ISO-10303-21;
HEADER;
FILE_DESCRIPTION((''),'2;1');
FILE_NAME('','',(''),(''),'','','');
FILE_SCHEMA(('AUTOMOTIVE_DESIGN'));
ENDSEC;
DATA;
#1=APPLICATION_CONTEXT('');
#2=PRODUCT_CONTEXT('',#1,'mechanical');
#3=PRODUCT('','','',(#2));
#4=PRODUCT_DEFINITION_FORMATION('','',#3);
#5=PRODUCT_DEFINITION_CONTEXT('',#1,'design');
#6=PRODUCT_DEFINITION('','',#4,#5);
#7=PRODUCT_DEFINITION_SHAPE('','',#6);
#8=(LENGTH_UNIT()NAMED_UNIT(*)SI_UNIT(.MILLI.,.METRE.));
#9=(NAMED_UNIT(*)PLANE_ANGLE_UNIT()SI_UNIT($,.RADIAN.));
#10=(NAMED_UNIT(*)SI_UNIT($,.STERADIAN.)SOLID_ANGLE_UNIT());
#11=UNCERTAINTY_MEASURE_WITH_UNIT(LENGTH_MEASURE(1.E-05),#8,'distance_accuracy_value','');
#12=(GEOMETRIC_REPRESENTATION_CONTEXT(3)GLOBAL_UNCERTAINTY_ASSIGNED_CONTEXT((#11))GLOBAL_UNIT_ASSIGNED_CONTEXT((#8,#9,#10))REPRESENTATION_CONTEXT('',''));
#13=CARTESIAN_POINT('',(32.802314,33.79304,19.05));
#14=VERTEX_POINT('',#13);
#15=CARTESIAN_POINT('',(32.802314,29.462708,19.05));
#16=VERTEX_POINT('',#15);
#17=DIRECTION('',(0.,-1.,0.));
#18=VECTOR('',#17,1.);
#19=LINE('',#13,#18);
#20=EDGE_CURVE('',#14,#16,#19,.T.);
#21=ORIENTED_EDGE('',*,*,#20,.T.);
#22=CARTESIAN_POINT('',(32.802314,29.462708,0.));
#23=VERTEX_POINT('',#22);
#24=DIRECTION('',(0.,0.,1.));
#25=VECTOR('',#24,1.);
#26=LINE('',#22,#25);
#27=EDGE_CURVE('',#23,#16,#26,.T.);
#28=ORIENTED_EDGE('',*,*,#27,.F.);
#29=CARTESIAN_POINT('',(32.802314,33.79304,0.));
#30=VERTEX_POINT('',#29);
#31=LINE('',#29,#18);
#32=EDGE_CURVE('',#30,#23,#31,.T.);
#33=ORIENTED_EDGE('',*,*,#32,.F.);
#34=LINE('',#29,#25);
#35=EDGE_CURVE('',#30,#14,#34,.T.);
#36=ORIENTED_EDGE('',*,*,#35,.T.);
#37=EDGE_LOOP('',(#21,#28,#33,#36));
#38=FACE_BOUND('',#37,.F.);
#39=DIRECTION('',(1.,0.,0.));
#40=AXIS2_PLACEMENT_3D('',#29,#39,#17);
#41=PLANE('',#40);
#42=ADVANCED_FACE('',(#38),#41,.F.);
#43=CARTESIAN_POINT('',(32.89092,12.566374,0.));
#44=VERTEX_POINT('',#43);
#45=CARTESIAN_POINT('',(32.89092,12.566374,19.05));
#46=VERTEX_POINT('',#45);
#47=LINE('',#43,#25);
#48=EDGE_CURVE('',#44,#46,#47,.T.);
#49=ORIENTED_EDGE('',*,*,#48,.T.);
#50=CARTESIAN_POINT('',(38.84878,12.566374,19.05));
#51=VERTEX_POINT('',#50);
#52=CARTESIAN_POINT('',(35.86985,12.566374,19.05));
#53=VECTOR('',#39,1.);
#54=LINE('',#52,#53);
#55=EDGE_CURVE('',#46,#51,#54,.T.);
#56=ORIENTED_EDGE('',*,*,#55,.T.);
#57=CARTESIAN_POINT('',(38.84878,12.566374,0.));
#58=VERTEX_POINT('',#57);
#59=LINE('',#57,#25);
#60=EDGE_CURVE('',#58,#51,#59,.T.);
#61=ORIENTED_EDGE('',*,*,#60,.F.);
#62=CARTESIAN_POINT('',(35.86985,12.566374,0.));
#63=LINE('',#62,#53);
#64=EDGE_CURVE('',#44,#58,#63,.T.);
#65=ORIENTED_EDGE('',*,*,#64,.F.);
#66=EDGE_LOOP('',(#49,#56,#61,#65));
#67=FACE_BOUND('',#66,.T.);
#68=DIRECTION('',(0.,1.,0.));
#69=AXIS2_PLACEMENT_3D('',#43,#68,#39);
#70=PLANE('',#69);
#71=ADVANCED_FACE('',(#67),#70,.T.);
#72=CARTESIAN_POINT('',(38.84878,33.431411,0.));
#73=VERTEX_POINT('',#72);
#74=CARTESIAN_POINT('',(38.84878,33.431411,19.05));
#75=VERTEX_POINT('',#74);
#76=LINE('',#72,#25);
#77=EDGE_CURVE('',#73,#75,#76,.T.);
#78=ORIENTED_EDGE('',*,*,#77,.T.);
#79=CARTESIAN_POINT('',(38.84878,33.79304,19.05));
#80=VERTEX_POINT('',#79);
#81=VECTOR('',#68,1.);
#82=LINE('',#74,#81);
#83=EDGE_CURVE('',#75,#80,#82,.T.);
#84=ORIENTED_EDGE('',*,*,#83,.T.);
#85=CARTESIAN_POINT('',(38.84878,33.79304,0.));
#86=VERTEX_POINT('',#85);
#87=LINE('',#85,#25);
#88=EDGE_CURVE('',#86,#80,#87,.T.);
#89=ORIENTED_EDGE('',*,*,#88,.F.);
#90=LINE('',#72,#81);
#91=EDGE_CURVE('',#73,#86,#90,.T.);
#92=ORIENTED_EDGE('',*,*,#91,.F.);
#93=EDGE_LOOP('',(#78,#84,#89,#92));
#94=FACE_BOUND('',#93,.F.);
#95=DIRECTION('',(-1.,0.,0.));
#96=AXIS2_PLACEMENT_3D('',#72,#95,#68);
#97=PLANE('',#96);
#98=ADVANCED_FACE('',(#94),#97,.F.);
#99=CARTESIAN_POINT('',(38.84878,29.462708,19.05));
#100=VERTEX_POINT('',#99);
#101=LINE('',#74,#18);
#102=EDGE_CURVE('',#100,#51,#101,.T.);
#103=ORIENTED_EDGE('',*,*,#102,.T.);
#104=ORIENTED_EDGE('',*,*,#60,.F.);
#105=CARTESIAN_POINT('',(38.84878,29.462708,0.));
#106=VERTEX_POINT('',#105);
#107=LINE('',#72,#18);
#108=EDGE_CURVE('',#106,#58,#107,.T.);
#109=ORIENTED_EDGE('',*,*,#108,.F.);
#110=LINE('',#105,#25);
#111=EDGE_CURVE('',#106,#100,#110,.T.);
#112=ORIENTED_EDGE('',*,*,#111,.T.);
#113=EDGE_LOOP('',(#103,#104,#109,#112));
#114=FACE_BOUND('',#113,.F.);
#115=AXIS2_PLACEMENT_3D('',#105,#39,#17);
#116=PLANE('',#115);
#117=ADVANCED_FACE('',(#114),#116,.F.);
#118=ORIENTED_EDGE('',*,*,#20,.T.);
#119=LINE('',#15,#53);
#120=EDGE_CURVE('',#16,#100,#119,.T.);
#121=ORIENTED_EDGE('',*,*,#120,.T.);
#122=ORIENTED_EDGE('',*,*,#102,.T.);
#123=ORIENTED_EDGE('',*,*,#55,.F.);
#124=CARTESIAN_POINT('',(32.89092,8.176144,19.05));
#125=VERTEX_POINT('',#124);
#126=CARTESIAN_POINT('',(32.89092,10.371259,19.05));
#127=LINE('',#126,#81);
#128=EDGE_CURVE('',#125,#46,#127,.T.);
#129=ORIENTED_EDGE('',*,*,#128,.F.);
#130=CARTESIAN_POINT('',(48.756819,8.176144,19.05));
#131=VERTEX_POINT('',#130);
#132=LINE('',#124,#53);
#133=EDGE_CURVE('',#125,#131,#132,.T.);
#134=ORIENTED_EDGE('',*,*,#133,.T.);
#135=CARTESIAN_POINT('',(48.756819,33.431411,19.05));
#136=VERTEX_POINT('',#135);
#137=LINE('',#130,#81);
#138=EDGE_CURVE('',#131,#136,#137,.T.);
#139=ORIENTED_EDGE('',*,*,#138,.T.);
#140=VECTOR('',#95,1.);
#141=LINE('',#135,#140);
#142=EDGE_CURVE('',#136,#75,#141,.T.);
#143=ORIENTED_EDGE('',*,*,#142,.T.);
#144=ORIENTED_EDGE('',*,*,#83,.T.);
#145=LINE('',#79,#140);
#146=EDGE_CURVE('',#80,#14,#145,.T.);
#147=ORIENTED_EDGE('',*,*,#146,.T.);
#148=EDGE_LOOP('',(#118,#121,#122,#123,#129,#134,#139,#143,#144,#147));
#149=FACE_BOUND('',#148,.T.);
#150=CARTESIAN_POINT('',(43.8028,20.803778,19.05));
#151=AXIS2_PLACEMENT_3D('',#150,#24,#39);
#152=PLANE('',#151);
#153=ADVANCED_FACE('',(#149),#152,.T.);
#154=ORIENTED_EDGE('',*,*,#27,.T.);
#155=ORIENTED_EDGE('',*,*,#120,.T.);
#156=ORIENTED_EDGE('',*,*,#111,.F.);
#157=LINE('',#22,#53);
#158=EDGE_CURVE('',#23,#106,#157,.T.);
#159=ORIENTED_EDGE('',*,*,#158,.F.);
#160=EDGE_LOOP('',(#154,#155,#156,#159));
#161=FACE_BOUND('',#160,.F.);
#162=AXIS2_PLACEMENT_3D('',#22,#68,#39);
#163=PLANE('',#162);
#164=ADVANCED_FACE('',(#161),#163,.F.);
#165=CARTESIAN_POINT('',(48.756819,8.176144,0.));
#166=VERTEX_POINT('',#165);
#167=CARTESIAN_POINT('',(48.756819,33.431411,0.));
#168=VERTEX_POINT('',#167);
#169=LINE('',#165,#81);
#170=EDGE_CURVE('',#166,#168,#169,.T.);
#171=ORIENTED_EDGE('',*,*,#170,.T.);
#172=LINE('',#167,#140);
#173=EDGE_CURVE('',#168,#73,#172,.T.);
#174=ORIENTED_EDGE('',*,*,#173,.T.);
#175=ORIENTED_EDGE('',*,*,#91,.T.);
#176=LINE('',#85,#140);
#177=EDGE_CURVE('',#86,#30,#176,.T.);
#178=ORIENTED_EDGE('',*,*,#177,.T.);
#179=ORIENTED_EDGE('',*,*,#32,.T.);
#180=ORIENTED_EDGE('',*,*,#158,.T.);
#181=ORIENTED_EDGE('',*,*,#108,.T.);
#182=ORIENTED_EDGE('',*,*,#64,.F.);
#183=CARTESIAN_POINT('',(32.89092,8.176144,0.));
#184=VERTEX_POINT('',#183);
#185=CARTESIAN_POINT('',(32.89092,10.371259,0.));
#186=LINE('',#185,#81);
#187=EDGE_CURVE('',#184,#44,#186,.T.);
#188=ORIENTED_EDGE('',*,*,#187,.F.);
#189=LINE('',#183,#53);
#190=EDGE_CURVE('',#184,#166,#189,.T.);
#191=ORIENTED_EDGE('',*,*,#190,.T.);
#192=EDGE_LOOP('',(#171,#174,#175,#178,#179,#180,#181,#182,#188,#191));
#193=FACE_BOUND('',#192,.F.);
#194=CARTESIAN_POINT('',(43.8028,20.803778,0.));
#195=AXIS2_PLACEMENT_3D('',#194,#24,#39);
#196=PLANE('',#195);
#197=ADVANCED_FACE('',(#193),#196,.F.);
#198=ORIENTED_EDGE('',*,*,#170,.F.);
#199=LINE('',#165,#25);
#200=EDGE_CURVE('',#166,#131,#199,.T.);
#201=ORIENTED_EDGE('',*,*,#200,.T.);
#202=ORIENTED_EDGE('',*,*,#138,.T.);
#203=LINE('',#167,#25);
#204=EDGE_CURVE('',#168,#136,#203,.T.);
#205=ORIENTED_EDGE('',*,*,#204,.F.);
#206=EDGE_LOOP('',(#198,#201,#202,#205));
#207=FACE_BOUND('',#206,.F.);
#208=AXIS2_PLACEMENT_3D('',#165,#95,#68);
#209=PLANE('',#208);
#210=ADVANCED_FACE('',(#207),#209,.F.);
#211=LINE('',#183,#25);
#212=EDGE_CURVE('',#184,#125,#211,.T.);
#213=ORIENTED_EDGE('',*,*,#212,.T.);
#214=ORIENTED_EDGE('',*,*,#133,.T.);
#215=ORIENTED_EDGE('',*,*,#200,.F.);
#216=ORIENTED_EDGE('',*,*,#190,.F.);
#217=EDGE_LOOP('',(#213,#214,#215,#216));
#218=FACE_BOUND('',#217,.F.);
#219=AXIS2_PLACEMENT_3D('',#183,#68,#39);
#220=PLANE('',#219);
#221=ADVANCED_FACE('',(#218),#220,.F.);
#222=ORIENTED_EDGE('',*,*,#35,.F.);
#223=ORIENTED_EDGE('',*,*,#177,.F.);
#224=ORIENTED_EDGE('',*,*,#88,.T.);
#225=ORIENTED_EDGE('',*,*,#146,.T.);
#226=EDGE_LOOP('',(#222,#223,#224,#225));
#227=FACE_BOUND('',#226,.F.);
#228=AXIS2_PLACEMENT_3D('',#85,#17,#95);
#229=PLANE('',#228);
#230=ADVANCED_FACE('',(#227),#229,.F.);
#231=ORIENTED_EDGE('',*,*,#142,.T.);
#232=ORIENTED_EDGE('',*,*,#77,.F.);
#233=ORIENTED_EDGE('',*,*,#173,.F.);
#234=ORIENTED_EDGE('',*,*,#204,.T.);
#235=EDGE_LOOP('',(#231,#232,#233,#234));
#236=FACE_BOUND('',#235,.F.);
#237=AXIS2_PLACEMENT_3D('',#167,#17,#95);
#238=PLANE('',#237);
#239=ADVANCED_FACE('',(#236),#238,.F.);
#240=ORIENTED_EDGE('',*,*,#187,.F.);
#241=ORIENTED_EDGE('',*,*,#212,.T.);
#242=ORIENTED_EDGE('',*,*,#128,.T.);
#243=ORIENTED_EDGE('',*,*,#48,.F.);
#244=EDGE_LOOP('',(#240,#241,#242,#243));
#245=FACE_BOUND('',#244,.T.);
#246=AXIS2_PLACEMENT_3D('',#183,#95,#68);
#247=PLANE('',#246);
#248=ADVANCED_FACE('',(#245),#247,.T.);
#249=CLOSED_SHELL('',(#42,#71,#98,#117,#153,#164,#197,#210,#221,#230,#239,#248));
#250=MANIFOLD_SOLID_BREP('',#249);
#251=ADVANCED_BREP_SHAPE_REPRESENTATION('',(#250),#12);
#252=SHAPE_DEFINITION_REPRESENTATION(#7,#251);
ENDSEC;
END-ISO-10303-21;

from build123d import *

# Parameters (mm, degrees)
F2_W     = 5.9578604996
F2_H     = 4.390229471
F3_DEPTH = 19.05


# Not quite as in the source:
# - the program builds the solid bodies; features that only make, move or delete a surface that nothing else refers to are left out


with BuildPart() as f3:
    # F2 (on Top) → F3 (new body)
    with BuildSketch(Plane.XY):
        Polygon((48.7568192184, 33.4314107895), (38.8487800956, 33.4314107895), (38.8487800956, 29.4627081603), (38.8487800956, 12.5663736835), (38.8487800956, 8.1761442125), (48.7568192184, 8.1761442125), align=None)
        Polygon((38.8487800956, 29.4627081603), (38.8487800956, 33.4314107895), (38.8487800956, 33.7930396199), (32.8023135662, 33.7930396199), (32.8023135662, 29.4627081603), align=None)
        with Locations((35.8698498458, 10.371258948)):
            Rectangle(F2_W, F2_H)
    extrude(amount=F3_DEPTH)


solid = f3.part
